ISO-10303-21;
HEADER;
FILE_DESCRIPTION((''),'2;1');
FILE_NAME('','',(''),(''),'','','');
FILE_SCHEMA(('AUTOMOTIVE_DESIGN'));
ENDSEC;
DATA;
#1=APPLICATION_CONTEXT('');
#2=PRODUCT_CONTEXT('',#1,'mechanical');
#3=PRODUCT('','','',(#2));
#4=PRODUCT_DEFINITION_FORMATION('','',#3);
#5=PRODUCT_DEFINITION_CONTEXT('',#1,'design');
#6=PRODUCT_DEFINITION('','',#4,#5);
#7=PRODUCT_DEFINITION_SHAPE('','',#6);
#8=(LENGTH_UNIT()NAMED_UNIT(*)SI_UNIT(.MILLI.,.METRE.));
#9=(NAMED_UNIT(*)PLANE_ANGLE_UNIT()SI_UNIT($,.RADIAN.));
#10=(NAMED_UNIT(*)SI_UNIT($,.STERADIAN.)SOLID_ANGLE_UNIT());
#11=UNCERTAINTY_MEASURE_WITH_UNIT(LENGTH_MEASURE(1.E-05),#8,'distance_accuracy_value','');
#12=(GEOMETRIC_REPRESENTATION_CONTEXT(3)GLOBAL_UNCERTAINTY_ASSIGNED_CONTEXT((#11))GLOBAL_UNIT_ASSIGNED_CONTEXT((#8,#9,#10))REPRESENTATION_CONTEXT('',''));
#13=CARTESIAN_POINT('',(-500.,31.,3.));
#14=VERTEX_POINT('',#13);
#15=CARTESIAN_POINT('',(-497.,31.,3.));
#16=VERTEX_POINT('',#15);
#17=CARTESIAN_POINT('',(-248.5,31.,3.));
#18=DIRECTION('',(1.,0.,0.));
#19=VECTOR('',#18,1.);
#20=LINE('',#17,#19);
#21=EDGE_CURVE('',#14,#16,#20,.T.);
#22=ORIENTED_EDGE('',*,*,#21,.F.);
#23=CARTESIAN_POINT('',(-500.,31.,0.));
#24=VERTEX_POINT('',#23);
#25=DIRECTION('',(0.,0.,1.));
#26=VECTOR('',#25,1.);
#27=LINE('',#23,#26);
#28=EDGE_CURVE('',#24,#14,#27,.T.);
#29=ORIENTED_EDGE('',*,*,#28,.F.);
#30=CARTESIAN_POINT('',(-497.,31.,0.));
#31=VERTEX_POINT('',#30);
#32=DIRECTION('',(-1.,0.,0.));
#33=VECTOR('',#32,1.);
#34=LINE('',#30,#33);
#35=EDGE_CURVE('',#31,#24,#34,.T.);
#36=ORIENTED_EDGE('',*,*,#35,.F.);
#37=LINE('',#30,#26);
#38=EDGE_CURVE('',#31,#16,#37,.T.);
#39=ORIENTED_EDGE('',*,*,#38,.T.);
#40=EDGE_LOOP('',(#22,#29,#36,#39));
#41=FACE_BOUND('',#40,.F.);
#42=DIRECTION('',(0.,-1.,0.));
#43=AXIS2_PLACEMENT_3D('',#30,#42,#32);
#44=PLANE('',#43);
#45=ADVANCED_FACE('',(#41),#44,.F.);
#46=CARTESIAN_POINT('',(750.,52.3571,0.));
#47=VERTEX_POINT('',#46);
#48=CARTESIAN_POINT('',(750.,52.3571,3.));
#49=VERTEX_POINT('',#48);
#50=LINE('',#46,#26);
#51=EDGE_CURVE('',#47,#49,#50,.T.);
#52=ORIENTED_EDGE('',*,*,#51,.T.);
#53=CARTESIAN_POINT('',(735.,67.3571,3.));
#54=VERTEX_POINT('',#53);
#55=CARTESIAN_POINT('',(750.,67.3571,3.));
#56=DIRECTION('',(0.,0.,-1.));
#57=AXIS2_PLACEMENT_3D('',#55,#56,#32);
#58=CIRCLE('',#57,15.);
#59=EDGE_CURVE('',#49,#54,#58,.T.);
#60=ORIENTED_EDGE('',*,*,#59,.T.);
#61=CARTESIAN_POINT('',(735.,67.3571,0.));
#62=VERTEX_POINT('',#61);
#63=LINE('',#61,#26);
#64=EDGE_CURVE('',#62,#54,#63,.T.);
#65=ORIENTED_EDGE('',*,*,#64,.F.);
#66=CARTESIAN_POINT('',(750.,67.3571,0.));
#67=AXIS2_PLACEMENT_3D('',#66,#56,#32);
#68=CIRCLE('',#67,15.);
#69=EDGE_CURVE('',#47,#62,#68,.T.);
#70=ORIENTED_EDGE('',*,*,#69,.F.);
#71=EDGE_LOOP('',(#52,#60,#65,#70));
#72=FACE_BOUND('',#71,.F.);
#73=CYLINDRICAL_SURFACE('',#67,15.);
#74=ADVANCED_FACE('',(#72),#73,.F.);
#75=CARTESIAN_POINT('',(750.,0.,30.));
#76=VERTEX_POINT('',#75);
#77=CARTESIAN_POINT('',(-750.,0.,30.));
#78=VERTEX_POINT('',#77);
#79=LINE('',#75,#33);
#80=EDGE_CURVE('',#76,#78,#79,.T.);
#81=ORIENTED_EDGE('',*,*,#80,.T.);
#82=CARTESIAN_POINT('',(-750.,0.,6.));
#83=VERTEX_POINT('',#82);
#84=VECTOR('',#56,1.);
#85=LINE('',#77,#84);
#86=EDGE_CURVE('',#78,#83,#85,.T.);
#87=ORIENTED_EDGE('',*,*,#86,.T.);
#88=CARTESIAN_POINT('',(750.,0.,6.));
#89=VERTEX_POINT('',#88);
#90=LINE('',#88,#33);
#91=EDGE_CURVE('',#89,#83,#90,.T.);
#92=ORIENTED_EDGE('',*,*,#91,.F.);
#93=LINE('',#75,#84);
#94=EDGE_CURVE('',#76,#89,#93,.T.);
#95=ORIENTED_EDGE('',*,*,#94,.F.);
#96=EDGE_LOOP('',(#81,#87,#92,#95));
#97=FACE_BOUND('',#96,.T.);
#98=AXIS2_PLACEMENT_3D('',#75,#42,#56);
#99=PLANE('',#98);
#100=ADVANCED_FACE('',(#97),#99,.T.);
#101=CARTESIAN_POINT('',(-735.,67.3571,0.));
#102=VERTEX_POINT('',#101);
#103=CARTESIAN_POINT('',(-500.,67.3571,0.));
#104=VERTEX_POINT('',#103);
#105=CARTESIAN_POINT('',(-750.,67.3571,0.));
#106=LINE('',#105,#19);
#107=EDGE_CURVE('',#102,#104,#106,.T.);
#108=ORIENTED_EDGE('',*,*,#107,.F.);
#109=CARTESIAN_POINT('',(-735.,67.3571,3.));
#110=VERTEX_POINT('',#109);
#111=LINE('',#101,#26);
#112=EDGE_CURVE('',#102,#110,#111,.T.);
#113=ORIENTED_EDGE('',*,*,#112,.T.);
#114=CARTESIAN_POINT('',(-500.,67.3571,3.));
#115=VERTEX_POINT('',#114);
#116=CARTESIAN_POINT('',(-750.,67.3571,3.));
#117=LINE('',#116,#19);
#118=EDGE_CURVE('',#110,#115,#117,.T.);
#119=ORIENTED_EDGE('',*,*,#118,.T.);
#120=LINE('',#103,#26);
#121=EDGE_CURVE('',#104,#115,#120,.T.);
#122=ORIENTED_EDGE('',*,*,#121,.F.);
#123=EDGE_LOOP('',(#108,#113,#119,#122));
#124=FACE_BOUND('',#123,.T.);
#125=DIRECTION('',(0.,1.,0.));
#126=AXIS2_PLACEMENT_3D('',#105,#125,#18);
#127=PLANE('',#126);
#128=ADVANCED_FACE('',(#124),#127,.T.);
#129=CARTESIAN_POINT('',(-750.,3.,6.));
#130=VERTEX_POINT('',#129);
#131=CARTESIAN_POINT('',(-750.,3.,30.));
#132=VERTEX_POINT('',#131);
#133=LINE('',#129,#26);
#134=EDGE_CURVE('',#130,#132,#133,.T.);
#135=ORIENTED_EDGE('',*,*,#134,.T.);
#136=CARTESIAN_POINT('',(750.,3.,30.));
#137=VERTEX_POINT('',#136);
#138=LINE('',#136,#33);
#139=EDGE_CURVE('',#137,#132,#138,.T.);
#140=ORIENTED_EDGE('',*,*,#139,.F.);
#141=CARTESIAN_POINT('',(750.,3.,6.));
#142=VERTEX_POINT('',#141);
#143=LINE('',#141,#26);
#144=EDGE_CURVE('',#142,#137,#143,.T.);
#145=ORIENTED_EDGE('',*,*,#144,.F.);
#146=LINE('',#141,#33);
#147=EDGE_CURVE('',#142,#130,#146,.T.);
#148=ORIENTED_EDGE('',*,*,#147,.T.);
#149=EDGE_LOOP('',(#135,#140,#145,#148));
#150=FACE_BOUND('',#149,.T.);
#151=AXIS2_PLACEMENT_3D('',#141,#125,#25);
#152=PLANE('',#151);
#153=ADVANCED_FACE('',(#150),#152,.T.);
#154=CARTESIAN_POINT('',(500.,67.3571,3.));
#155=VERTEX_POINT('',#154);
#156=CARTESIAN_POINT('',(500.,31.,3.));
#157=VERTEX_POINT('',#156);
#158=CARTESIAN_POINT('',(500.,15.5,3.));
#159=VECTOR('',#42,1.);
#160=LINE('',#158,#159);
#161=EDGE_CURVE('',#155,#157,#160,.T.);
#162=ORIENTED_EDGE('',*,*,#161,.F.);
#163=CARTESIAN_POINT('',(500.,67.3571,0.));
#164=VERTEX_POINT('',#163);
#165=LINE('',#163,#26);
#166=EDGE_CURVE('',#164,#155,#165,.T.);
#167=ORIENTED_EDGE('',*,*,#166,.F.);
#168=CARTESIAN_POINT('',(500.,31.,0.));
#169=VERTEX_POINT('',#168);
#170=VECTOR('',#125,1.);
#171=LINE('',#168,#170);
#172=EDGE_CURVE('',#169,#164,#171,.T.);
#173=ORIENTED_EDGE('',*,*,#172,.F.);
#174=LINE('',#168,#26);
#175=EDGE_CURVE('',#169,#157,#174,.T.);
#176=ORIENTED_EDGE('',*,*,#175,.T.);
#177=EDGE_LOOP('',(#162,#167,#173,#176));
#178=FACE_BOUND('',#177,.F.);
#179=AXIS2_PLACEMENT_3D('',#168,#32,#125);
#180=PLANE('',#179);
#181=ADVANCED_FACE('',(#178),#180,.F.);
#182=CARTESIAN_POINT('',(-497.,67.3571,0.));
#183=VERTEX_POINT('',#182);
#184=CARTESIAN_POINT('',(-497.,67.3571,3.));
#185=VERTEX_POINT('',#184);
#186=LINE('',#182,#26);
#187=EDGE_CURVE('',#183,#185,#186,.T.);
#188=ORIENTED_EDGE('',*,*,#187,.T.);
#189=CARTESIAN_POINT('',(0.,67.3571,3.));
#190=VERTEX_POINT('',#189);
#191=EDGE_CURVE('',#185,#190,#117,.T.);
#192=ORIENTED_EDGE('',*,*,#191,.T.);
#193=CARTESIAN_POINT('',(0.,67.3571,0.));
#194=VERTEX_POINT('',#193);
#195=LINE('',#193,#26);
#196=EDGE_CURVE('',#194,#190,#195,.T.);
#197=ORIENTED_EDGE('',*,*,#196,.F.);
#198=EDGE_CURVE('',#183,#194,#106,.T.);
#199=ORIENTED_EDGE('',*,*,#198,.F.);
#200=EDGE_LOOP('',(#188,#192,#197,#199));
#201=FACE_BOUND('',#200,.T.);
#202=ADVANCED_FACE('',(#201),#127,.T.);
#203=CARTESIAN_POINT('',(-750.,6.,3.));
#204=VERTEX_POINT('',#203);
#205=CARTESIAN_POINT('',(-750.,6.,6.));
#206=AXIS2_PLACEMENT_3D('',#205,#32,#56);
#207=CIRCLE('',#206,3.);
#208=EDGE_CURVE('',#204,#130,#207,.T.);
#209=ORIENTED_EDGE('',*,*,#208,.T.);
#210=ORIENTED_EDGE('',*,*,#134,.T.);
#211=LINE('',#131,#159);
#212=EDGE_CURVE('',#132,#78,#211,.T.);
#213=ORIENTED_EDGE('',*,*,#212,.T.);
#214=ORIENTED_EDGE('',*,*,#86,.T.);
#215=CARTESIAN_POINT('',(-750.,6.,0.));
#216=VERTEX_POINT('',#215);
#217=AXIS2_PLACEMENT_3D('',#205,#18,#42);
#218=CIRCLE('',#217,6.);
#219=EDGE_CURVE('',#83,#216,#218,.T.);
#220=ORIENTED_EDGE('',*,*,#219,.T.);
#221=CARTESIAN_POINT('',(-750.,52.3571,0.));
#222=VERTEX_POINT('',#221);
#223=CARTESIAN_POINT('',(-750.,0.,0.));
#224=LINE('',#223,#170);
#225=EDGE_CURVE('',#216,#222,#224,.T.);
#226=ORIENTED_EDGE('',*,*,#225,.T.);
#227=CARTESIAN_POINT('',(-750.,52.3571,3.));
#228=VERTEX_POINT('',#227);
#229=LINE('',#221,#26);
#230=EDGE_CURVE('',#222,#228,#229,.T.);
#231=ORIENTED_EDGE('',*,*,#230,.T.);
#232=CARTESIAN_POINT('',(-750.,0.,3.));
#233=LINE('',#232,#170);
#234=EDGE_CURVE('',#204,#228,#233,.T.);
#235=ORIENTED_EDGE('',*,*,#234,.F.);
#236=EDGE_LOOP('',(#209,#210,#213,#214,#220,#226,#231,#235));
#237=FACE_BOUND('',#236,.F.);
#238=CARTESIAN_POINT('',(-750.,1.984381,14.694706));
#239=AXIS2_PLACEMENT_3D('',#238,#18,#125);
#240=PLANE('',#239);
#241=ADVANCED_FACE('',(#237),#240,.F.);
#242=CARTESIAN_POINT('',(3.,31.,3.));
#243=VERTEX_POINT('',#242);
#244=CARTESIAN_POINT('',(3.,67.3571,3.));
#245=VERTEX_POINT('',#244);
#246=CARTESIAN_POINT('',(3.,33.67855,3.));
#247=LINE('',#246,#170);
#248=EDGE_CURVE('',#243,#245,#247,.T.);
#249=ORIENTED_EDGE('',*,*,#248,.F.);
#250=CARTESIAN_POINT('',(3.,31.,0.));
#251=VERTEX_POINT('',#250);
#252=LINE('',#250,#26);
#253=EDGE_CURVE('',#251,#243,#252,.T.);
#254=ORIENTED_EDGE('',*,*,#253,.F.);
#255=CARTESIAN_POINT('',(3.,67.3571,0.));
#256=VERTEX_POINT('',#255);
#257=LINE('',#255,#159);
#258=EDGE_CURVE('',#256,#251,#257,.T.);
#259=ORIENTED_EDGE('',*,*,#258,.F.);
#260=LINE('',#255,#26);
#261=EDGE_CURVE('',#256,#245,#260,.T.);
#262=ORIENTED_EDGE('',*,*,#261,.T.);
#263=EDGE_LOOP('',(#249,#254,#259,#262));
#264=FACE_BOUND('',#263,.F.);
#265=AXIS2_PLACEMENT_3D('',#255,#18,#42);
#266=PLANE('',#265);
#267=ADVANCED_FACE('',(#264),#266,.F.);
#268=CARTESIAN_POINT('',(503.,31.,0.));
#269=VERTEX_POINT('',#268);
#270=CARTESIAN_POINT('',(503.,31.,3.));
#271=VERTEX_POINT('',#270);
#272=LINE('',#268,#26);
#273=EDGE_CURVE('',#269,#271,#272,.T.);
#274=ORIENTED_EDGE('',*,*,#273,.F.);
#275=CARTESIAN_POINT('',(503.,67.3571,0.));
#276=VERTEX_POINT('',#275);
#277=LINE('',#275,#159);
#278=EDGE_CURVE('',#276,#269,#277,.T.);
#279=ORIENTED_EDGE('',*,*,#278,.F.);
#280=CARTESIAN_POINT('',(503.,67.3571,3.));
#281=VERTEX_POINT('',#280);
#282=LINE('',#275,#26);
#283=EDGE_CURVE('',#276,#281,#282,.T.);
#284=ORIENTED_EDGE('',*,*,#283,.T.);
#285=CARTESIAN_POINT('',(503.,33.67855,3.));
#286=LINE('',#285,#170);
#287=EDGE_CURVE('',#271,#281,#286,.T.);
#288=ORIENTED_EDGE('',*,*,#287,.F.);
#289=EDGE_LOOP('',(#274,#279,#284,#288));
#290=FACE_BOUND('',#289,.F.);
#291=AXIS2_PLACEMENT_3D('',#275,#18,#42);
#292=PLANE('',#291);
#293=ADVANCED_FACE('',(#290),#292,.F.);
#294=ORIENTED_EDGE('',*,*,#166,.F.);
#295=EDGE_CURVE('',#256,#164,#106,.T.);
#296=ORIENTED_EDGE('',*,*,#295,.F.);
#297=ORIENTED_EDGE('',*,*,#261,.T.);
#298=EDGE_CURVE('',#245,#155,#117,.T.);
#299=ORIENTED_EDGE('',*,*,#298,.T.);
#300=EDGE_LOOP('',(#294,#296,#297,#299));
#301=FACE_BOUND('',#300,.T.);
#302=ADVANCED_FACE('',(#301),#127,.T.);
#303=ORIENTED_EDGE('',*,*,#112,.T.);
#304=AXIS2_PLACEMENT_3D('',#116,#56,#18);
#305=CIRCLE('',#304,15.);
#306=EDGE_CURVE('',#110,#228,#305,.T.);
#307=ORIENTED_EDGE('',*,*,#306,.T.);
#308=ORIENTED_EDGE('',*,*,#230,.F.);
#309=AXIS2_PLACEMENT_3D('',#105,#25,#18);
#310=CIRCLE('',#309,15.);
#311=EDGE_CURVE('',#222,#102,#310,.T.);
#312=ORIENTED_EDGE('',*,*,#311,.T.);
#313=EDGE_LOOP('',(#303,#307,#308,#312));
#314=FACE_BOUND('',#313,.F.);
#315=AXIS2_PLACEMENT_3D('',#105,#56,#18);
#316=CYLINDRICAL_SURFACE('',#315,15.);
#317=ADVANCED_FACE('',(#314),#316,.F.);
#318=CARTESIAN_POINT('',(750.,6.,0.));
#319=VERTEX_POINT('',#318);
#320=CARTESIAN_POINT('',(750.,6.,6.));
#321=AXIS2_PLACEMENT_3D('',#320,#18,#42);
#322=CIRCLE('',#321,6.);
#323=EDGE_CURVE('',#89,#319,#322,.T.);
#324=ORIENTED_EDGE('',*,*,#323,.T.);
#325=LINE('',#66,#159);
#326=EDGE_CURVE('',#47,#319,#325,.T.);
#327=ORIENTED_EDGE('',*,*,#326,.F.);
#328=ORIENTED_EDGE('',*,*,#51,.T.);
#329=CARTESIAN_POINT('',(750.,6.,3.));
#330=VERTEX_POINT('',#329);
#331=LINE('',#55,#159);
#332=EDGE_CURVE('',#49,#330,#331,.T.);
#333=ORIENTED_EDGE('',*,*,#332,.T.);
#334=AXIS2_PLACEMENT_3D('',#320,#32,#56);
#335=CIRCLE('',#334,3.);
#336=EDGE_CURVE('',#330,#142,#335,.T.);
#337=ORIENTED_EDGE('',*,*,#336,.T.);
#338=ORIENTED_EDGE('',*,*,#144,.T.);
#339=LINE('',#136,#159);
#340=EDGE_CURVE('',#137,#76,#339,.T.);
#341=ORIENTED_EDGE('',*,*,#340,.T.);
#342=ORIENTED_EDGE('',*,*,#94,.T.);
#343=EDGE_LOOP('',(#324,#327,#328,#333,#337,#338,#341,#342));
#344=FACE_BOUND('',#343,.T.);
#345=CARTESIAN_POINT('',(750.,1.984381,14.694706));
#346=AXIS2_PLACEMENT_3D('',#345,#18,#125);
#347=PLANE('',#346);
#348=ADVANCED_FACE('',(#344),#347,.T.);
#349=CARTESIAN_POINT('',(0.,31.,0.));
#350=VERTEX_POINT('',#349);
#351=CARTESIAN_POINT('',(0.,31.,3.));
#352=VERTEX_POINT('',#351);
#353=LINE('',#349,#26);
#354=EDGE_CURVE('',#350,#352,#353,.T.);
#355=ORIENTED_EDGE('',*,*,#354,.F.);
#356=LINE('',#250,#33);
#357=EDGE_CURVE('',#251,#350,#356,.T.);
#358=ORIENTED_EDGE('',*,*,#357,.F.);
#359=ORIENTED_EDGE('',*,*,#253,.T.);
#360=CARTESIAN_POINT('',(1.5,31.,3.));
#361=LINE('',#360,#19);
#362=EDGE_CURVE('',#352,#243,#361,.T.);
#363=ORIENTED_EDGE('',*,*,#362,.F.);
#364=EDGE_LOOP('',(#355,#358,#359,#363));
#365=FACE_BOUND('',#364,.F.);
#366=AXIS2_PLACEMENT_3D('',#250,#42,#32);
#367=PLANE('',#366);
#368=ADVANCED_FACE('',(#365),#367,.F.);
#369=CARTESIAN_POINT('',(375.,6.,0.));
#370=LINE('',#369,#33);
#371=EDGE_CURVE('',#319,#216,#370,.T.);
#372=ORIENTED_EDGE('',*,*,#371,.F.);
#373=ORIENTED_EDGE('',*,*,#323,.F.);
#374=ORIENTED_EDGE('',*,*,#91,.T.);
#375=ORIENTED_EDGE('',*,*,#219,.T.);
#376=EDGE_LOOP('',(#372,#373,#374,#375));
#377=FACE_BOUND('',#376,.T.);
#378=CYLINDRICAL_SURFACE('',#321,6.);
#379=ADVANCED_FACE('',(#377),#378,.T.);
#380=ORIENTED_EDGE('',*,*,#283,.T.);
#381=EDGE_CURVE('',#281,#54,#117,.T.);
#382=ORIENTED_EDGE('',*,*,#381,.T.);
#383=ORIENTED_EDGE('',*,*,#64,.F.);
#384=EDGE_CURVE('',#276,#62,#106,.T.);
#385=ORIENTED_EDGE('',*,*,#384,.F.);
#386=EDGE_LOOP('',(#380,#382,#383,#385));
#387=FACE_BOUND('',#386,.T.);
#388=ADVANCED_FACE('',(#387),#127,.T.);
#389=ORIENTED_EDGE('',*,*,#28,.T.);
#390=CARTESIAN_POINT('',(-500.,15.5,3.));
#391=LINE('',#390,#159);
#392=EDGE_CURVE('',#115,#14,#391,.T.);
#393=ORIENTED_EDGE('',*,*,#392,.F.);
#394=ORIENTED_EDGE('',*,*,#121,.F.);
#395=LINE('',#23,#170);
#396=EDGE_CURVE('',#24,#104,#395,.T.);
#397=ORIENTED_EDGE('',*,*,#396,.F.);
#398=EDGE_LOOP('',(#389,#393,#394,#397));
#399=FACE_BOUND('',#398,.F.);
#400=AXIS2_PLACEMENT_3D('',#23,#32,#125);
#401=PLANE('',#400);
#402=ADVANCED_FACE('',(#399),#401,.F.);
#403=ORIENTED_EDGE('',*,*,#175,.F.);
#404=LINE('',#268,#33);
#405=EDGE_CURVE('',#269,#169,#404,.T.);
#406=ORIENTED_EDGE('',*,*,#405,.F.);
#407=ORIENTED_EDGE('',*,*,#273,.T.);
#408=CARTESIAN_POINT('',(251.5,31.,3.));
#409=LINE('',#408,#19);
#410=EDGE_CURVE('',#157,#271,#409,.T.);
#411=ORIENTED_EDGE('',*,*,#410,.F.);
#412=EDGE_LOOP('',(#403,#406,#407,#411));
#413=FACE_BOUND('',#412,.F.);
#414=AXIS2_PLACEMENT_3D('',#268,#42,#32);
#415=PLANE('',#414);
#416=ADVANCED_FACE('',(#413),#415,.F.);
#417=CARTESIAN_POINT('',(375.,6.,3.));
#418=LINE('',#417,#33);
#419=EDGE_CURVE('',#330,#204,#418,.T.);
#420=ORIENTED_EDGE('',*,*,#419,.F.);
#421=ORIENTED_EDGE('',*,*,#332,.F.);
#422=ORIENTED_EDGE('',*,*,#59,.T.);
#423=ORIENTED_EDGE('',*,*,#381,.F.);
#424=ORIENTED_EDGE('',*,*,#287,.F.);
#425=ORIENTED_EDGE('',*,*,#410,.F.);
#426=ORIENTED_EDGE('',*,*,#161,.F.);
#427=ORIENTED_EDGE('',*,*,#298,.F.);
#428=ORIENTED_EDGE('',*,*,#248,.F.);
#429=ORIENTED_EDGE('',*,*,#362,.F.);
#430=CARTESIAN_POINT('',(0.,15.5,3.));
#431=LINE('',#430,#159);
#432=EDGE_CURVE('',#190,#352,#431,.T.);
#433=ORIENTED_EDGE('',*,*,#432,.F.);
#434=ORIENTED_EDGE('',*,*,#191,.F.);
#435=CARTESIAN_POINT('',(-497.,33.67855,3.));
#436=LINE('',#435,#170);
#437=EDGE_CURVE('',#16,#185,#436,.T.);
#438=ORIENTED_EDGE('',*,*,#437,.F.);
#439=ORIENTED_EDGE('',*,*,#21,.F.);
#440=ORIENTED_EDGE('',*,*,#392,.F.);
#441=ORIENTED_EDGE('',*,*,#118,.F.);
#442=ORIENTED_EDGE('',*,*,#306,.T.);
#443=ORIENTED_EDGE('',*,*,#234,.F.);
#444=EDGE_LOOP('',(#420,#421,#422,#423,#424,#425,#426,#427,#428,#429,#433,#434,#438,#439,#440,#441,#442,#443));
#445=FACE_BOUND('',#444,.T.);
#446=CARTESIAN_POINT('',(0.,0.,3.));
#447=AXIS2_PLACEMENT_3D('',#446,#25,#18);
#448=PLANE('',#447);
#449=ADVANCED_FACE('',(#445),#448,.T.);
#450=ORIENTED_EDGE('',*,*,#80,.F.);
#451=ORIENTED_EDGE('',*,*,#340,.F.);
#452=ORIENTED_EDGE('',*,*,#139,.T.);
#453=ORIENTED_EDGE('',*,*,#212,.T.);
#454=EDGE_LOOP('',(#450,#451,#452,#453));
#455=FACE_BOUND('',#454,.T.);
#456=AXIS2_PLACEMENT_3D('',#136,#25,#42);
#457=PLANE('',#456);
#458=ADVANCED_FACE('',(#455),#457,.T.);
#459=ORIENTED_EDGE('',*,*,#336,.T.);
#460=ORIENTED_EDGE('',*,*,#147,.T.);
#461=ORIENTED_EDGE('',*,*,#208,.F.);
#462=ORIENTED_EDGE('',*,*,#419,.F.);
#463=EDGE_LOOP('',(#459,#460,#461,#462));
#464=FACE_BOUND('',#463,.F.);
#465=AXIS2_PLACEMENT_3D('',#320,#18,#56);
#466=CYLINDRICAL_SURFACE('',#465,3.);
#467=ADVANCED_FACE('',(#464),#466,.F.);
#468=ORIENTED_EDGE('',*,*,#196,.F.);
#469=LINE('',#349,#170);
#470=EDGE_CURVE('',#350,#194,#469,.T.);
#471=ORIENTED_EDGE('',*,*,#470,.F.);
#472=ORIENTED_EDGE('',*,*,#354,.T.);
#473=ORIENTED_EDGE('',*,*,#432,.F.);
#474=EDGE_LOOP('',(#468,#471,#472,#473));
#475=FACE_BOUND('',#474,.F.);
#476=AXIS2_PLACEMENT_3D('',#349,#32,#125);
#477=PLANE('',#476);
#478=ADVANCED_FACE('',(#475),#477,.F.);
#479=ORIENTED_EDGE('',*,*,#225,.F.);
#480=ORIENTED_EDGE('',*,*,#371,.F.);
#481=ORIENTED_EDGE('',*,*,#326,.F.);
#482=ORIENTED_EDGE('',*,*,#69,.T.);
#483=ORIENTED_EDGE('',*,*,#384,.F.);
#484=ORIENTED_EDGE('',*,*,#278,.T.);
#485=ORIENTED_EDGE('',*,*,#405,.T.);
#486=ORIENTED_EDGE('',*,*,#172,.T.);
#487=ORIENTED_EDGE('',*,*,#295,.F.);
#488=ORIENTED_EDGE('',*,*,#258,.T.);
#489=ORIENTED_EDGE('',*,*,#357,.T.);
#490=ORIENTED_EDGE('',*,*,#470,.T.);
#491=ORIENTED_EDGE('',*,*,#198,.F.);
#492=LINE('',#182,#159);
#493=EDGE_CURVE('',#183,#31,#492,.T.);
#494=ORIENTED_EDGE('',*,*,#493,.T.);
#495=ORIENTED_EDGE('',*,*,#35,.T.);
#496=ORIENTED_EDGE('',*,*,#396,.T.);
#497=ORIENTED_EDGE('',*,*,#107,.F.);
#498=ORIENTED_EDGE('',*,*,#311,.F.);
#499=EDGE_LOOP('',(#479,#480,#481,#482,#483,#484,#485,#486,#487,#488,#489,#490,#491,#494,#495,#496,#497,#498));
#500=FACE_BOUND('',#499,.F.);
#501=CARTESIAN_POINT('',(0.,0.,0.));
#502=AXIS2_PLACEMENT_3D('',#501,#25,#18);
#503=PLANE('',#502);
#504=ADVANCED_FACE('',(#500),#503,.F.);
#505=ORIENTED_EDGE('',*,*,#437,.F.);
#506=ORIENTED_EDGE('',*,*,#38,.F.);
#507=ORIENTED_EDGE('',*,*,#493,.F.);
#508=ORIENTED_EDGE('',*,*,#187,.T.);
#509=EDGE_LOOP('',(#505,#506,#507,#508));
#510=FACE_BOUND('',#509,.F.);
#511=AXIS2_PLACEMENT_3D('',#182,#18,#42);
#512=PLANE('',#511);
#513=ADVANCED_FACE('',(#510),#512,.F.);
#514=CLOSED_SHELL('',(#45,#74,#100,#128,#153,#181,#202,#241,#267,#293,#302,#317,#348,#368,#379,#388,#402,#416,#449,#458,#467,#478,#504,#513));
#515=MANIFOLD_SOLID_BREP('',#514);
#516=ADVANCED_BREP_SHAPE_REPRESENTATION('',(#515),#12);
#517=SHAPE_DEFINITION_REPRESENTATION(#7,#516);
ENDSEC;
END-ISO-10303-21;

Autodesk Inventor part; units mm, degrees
ref_plane "YZ Plane" through (0, 0, 0) normal (1, 0, 0) x (0, 1, 0)
ref_plane "XZ Plane" through (0, 0, 0) normal (0, 1, 0) x (-1, 0, 0)
ref_plane "XY Plane" through (0, 0, 0) normal (0, 0, 1) x (1, 0, 0)
sketch "Sketch1" plane through (0, 0, 0) normal (0, 0, 1) x (1, 0, 0)
  line L0 (-750, 67.3571) -> (750, 67.3571)
  line L1 (750, 67.3571) -> (750, 0)
  line L2 (750, 0) -> (-750, 0)
  line L3 (-750, 0) -> (-750, 67.3571)
  point P0 (0, 0)
  point P1 (0, 0)
  dimension "d0" = 1500
  dimension "d1" = 67.3571
extrude "Plate1" add sketch "Sketch1" along normal blind 3
sketch "Sketch2" plane through (750, 3, 0) normal (0, -1, 0) x (1, 0, 0)
  line L0 (-1500, 0) -> (0, 0)
  line L1 (0, 0) -> (0, 30)
  line L2 (0, 30) -> (-1500, 30)
  line L3 (-1500, 30) -> (-1500, 0)
edge flange "Flange1" height 30 angle 90 thickness 3 bend radius 3 thickness toward (0, -1, 0) relief tear relief width 3 relief depth 1.5 edges at (0, 0, 3) wall of the first edge with corners at (-750, 3, 0) (750, 3, 0) (750, 3, 30) (-750, 3, 30)
bend "Bend1"
corner "Corner1"
sketch "Sketch5" plane through (0, 0, 0) normal (0, 0, -1) x (-1, 0, 0)
  line L0 (750, 67.3571) -> (-750, 67.3571) projected
  line L1 (497, 67.3571) -> (497, 31)
  line L2 (497, 31) -> (500, 31)
  line L3 (500, 31) -> (500, 67.3571)
  line L4 (750, 0) -> (-750, 0) projected
  point P0 (0, 0)
  dimension "d18" = 3
  dimension "d19" = 250
  dimension "d20" = 31
extrude "Extrusion1" cut sketch "Sketch5" against normal through all
pattern_linear "Rectangular Pattern1" count 3 spacing 500 along (1, 0, 0) of "Extrusion1"
sketch "Sketch6" plane through (0, 0, 0) normal (0, 0, -1) x (-1, 0, 0)
  line L0 (-750, 67.3571) -> (-750, 6) projected
  circle A0 centre (-750, 67.3571) radius 15
  line L1 (-750, 67.3571) -> (-503, 67.3571) projected
  point P0 (0, 0)
  point P1 (-735, 67.3571)
  point P2 (-750, 52.3571)
  dimension "d24" = 30
extrude "Extrusion2" cut sketch "Sketch6" against normal through all contours L1 A0 L0 picked at (-740.1254, 66.2445)
mirror "Mirror1" about plane through (0, 0, 0) normal (1, 0, 0) of "Extrusion2"
equation "\"d1\" = Стрингер_3"
equation "\"d18\" = Thickness"
equation "\"d2\" = Thickness"
equation "\"d3\" = BendReliefWidth"
equation "\"d4\" = BendReliefDepth"
equation "\"d5\" = MinimumRemnant"
equation "\"d6\" = TransitionRadius"
equation "\"d9\" = BendRadius"
equation "\"d10\" = CornerReliefSize"
equation "\"d11\" = GapSize"
equation "\"d12\" = JacobiRadiusSize"
equation "\"BendRadius\" = Thickness"
equation "\"BendReliefWidth\" = Thickness"
equation "\"BendReliefDepth\" = 0.5 * Thickness"
equation "\"CornerReliefSize\" = 4 * Thickness"
equation "\"MinimumRemnant\" = 2 * Thickness"
equation "\"TransitionRadius\" = BendRadius"
equation "\"JacobiRadiusSize\" = BendRadius"
equation "\"GapSize\" = Thickness"
equation "\"Стрингер_3\" = 67.357059"
equation "\"Thickness\" = 3"
properties part number "МОО 053 стрингер борт"
